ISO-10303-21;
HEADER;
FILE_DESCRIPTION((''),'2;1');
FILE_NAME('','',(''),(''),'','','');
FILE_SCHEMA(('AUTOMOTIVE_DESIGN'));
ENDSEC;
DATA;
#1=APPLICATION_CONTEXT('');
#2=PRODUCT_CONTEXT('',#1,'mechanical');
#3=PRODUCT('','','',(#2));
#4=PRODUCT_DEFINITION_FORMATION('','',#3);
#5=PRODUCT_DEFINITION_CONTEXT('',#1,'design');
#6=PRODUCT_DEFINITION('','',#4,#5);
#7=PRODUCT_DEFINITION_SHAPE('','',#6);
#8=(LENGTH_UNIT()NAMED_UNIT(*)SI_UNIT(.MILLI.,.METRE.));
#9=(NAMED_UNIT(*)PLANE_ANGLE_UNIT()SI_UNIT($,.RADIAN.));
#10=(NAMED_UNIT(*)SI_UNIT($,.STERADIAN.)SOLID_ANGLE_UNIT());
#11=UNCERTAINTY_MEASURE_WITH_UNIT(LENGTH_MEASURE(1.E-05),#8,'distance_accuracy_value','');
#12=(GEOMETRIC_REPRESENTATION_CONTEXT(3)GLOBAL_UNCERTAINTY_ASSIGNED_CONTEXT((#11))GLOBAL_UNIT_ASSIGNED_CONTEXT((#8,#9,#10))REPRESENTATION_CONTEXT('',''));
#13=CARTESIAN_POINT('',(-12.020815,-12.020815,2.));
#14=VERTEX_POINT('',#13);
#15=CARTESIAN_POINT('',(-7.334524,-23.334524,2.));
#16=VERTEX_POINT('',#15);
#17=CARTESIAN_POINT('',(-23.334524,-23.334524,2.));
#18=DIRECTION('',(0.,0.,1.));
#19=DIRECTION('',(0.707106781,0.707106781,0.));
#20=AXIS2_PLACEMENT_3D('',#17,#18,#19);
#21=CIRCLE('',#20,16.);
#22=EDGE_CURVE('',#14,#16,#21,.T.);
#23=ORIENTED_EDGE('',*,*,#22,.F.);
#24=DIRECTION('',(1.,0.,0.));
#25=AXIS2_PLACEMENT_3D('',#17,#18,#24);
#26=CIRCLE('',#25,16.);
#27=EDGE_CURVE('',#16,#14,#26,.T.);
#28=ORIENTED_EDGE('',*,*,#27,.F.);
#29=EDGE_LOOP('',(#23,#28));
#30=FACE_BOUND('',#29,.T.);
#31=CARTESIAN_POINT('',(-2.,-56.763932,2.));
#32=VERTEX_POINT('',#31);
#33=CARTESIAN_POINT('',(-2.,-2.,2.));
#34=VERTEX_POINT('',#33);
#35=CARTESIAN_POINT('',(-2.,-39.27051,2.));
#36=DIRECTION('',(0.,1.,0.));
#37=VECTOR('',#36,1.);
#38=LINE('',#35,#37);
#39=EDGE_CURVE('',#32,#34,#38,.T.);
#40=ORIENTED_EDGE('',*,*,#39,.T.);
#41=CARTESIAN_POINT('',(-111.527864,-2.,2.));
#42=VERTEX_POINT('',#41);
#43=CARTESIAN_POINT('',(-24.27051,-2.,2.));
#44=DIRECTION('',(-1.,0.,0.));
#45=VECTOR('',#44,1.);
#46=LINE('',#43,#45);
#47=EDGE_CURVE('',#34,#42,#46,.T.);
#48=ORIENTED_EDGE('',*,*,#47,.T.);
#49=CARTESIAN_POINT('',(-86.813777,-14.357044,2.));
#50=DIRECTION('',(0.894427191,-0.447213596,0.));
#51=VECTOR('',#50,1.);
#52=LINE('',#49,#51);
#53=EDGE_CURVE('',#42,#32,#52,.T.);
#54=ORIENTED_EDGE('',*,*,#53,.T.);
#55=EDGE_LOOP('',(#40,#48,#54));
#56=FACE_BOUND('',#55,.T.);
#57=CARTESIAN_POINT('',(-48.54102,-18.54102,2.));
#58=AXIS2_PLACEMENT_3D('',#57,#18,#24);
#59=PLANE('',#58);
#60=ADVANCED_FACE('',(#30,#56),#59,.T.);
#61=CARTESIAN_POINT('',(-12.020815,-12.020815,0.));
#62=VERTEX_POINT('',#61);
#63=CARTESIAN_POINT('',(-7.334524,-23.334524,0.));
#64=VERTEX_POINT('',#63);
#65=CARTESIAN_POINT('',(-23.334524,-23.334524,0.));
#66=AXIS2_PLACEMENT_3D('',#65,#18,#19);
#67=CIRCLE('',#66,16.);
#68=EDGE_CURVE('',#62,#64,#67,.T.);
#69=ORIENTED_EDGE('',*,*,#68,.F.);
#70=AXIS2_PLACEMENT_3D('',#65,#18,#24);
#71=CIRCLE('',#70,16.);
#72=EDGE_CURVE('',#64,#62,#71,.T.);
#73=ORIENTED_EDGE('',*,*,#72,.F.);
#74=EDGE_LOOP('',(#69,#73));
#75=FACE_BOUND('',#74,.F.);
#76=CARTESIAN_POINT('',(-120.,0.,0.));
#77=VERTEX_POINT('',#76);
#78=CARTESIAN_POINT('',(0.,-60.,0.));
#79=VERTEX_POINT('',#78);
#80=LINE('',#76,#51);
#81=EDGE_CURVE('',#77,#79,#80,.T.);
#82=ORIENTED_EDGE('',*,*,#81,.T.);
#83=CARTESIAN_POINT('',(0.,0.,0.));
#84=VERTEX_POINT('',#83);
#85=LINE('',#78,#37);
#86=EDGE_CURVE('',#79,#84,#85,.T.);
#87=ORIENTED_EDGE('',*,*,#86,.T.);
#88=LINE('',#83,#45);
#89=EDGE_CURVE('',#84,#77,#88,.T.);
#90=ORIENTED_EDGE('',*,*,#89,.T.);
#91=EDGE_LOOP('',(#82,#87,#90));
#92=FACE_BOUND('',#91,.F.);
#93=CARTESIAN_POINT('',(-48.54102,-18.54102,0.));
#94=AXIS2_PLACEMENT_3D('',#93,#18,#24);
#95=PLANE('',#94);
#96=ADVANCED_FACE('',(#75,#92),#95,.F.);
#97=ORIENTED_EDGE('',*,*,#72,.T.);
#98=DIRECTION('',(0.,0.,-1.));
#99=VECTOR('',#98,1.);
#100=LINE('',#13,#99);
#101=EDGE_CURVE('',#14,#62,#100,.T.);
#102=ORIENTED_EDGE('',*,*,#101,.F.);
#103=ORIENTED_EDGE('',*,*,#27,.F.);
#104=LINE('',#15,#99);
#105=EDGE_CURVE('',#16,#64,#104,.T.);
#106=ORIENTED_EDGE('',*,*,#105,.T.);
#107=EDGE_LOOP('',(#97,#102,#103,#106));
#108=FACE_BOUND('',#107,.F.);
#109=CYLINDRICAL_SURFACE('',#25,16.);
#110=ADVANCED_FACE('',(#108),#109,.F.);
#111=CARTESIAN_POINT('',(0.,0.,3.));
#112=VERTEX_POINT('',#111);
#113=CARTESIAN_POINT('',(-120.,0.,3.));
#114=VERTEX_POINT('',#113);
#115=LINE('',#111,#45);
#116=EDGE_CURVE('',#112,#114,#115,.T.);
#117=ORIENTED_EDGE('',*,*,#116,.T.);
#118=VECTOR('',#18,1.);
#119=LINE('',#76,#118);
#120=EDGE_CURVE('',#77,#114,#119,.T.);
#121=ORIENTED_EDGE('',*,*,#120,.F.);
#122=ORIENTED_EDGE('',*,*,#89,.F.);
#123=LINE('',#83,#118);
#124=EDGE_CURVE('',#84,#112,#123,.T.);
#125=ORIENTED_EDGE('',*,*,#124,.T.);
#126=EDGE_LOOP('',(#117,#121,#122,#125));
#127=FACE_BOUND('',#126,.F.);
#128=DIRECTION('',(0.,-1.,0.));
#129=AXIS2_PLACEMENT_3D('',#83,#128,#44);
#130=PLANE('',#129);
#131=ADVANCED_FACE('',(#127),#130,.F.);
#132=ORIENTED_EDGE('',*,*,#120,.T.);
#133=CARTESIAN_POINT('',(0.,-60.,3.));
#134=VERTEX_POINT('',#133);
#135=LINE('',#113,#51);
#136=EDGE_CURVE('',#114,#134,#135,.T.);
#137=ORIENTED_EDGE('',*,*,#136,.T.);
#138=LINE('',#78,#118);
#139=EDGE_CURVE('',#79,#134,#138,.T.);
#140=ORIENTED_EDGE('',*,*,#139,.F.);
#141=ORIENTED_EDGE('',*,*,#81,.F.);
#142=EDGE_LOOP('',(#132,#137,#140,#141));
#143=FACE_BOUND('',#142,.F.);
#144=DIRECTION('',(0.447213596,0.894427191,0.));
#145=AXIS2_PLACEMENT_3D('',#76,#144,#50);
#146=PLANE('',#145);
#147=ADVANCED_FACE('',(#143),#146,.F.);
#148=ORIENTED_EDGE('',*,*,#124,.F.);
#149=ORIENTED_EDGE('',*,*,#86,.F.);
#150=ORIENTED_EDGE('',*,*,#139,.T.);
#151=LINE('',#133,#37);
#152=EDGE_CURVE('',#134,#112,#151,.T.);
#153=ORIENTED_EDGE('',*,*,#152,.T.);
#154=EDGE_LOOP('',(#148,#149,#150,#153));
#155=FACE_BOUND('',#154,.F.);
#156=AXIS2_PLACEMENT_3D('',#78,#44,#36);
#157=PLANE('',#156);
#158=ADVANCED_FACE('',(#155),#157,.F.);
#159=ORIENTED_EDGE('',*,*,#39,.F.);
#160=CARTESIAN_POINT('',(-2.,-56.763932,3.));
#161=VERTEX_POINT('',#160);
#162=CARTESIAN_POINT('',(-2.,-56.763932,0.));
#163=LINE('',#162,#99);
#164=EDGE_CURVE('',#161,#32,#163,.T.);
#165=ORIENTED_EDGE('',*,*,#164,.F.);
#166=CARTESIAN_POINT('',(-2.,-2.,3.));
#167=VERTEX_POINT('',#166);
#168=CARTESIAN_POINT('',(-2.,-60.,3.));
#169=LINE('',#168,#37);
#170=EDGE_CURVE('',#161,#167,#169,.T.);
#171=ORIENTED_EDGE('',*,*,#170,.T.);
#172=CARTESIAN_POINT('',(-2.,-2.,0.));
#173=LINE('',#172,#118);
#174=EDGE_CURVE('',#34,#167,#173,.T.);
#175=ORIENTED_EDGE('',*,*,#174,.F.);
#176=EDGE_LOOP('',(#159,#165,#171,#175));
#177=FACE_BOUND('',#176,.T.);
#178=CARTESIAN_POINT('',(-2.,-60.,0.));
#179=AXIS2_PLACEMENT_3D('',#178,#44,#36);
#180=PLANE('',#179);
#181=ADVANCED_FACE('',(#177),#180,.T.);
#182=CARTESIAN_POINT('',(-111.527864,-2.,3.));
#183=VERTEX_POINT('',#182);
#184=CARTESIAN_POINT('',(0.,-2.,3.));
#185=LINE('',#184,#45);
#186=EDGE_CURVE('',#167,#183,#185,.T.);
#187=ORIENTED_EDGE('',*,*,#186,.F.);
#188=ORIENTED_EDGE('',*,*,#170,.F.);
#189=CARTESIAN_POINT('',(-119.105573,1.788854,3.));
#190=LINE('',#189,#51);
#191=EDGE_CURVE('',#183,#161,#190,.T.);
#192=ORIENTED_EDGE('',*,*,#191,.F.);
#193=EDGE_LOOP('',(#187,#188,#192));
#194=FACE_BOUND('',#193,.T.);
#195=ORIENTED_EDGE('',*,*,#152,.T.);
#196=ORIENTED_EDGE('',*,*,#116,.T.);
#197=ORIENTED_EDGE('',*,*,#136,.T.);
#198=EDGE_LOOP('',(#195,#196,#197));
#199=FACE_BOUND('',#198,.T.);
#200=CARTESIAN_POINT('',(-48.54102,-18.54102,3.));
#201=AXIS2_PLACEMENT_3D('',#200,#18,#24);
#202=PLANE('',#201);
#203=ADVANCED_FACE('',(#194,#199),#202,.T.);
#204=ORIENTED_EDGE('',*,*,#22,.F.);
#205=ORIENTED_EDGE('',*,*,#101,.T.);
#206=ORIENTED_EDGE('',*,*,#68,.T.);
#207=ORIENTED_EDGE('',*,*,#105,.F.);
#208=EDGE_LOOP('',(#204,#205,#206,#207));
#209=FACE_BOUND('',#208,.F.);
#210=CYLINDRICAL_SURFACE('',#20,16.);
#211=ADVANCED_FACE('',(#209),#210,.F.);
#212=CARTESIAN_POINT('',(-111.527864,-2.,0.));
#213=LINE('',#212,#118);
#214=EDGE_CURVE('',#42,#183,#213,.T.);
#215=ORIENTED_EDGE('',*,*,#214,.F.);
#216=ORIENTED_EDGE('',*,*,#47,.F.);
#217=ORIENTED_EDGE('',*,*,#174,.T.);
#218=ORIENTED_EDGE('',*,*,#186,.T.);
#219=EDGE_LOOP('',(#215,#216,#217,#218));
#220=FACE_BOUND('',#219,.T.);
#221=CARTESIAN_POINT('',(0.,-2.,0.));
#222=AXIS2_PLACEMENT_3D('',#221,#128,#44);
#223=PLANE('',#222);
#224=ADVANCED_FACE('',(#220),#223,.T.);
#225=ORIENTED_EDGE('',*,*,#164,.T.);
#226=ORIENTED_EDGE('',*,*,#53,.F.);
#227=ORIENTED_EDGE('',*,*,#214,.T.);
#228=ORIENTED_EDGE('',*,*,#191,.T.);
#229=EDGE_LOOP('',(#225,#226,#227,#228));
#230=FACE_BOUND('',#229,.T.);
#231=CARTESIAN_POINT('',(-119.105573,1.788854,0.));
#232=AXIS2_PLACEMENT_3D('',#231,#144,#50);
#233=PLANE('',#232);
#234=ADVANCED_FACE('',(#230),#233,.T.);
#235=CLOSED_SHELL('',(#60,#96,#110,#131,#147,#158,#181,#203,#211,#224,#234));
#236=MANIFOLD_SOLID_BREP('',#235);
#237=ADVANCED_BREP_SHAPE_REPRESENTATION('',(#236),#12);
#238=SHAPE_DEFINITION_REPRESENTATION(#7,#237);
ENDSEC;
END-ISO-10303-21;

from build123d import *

# Parameters (mm, degrees)
F1_DEPTH = 3
F2_T     = -2
F4_DEPTH = 2.001


# Not quite as in the source:
# - ends of sketch curves that miss each other by under 0.0002 mm in the source are joined


with BuildPart() as f1:
    # F0 (on Top) → F1 (new body)
    with BuildSketch(Plane.XY):
        Polygon((0, -60), (0, 0), (-120, 0), align=None)
    extrude(amount=F1_DEPTH)

    # F2
    f2_openings = [f1.faces().sort_by_distance(p)[0] for p in [
        (-40, -20, 3),
    ]]
    offset(amount=F2_T, openings=f2_openings)

    # F3 (on face) → F4 (cut, through all)
    with BuildSketch(Plane.XY.offset(2)):
        with BuildLine():
            ThreePointArc((-12.0208152802, -12.0208152802), (-38.1165962993, -29.457458697), (-7.3345237792, -23.3345237792))
            ThreePointArc((-7.3345237792, -23.3345237792), (-8.552451259, -17.2115888613), (-12.0208152802, -12.0208152802))
        make_face()
    extrude(amount=-F4_DEPTH, mode=Mode.SUBTRACT)


solid = f1.part
